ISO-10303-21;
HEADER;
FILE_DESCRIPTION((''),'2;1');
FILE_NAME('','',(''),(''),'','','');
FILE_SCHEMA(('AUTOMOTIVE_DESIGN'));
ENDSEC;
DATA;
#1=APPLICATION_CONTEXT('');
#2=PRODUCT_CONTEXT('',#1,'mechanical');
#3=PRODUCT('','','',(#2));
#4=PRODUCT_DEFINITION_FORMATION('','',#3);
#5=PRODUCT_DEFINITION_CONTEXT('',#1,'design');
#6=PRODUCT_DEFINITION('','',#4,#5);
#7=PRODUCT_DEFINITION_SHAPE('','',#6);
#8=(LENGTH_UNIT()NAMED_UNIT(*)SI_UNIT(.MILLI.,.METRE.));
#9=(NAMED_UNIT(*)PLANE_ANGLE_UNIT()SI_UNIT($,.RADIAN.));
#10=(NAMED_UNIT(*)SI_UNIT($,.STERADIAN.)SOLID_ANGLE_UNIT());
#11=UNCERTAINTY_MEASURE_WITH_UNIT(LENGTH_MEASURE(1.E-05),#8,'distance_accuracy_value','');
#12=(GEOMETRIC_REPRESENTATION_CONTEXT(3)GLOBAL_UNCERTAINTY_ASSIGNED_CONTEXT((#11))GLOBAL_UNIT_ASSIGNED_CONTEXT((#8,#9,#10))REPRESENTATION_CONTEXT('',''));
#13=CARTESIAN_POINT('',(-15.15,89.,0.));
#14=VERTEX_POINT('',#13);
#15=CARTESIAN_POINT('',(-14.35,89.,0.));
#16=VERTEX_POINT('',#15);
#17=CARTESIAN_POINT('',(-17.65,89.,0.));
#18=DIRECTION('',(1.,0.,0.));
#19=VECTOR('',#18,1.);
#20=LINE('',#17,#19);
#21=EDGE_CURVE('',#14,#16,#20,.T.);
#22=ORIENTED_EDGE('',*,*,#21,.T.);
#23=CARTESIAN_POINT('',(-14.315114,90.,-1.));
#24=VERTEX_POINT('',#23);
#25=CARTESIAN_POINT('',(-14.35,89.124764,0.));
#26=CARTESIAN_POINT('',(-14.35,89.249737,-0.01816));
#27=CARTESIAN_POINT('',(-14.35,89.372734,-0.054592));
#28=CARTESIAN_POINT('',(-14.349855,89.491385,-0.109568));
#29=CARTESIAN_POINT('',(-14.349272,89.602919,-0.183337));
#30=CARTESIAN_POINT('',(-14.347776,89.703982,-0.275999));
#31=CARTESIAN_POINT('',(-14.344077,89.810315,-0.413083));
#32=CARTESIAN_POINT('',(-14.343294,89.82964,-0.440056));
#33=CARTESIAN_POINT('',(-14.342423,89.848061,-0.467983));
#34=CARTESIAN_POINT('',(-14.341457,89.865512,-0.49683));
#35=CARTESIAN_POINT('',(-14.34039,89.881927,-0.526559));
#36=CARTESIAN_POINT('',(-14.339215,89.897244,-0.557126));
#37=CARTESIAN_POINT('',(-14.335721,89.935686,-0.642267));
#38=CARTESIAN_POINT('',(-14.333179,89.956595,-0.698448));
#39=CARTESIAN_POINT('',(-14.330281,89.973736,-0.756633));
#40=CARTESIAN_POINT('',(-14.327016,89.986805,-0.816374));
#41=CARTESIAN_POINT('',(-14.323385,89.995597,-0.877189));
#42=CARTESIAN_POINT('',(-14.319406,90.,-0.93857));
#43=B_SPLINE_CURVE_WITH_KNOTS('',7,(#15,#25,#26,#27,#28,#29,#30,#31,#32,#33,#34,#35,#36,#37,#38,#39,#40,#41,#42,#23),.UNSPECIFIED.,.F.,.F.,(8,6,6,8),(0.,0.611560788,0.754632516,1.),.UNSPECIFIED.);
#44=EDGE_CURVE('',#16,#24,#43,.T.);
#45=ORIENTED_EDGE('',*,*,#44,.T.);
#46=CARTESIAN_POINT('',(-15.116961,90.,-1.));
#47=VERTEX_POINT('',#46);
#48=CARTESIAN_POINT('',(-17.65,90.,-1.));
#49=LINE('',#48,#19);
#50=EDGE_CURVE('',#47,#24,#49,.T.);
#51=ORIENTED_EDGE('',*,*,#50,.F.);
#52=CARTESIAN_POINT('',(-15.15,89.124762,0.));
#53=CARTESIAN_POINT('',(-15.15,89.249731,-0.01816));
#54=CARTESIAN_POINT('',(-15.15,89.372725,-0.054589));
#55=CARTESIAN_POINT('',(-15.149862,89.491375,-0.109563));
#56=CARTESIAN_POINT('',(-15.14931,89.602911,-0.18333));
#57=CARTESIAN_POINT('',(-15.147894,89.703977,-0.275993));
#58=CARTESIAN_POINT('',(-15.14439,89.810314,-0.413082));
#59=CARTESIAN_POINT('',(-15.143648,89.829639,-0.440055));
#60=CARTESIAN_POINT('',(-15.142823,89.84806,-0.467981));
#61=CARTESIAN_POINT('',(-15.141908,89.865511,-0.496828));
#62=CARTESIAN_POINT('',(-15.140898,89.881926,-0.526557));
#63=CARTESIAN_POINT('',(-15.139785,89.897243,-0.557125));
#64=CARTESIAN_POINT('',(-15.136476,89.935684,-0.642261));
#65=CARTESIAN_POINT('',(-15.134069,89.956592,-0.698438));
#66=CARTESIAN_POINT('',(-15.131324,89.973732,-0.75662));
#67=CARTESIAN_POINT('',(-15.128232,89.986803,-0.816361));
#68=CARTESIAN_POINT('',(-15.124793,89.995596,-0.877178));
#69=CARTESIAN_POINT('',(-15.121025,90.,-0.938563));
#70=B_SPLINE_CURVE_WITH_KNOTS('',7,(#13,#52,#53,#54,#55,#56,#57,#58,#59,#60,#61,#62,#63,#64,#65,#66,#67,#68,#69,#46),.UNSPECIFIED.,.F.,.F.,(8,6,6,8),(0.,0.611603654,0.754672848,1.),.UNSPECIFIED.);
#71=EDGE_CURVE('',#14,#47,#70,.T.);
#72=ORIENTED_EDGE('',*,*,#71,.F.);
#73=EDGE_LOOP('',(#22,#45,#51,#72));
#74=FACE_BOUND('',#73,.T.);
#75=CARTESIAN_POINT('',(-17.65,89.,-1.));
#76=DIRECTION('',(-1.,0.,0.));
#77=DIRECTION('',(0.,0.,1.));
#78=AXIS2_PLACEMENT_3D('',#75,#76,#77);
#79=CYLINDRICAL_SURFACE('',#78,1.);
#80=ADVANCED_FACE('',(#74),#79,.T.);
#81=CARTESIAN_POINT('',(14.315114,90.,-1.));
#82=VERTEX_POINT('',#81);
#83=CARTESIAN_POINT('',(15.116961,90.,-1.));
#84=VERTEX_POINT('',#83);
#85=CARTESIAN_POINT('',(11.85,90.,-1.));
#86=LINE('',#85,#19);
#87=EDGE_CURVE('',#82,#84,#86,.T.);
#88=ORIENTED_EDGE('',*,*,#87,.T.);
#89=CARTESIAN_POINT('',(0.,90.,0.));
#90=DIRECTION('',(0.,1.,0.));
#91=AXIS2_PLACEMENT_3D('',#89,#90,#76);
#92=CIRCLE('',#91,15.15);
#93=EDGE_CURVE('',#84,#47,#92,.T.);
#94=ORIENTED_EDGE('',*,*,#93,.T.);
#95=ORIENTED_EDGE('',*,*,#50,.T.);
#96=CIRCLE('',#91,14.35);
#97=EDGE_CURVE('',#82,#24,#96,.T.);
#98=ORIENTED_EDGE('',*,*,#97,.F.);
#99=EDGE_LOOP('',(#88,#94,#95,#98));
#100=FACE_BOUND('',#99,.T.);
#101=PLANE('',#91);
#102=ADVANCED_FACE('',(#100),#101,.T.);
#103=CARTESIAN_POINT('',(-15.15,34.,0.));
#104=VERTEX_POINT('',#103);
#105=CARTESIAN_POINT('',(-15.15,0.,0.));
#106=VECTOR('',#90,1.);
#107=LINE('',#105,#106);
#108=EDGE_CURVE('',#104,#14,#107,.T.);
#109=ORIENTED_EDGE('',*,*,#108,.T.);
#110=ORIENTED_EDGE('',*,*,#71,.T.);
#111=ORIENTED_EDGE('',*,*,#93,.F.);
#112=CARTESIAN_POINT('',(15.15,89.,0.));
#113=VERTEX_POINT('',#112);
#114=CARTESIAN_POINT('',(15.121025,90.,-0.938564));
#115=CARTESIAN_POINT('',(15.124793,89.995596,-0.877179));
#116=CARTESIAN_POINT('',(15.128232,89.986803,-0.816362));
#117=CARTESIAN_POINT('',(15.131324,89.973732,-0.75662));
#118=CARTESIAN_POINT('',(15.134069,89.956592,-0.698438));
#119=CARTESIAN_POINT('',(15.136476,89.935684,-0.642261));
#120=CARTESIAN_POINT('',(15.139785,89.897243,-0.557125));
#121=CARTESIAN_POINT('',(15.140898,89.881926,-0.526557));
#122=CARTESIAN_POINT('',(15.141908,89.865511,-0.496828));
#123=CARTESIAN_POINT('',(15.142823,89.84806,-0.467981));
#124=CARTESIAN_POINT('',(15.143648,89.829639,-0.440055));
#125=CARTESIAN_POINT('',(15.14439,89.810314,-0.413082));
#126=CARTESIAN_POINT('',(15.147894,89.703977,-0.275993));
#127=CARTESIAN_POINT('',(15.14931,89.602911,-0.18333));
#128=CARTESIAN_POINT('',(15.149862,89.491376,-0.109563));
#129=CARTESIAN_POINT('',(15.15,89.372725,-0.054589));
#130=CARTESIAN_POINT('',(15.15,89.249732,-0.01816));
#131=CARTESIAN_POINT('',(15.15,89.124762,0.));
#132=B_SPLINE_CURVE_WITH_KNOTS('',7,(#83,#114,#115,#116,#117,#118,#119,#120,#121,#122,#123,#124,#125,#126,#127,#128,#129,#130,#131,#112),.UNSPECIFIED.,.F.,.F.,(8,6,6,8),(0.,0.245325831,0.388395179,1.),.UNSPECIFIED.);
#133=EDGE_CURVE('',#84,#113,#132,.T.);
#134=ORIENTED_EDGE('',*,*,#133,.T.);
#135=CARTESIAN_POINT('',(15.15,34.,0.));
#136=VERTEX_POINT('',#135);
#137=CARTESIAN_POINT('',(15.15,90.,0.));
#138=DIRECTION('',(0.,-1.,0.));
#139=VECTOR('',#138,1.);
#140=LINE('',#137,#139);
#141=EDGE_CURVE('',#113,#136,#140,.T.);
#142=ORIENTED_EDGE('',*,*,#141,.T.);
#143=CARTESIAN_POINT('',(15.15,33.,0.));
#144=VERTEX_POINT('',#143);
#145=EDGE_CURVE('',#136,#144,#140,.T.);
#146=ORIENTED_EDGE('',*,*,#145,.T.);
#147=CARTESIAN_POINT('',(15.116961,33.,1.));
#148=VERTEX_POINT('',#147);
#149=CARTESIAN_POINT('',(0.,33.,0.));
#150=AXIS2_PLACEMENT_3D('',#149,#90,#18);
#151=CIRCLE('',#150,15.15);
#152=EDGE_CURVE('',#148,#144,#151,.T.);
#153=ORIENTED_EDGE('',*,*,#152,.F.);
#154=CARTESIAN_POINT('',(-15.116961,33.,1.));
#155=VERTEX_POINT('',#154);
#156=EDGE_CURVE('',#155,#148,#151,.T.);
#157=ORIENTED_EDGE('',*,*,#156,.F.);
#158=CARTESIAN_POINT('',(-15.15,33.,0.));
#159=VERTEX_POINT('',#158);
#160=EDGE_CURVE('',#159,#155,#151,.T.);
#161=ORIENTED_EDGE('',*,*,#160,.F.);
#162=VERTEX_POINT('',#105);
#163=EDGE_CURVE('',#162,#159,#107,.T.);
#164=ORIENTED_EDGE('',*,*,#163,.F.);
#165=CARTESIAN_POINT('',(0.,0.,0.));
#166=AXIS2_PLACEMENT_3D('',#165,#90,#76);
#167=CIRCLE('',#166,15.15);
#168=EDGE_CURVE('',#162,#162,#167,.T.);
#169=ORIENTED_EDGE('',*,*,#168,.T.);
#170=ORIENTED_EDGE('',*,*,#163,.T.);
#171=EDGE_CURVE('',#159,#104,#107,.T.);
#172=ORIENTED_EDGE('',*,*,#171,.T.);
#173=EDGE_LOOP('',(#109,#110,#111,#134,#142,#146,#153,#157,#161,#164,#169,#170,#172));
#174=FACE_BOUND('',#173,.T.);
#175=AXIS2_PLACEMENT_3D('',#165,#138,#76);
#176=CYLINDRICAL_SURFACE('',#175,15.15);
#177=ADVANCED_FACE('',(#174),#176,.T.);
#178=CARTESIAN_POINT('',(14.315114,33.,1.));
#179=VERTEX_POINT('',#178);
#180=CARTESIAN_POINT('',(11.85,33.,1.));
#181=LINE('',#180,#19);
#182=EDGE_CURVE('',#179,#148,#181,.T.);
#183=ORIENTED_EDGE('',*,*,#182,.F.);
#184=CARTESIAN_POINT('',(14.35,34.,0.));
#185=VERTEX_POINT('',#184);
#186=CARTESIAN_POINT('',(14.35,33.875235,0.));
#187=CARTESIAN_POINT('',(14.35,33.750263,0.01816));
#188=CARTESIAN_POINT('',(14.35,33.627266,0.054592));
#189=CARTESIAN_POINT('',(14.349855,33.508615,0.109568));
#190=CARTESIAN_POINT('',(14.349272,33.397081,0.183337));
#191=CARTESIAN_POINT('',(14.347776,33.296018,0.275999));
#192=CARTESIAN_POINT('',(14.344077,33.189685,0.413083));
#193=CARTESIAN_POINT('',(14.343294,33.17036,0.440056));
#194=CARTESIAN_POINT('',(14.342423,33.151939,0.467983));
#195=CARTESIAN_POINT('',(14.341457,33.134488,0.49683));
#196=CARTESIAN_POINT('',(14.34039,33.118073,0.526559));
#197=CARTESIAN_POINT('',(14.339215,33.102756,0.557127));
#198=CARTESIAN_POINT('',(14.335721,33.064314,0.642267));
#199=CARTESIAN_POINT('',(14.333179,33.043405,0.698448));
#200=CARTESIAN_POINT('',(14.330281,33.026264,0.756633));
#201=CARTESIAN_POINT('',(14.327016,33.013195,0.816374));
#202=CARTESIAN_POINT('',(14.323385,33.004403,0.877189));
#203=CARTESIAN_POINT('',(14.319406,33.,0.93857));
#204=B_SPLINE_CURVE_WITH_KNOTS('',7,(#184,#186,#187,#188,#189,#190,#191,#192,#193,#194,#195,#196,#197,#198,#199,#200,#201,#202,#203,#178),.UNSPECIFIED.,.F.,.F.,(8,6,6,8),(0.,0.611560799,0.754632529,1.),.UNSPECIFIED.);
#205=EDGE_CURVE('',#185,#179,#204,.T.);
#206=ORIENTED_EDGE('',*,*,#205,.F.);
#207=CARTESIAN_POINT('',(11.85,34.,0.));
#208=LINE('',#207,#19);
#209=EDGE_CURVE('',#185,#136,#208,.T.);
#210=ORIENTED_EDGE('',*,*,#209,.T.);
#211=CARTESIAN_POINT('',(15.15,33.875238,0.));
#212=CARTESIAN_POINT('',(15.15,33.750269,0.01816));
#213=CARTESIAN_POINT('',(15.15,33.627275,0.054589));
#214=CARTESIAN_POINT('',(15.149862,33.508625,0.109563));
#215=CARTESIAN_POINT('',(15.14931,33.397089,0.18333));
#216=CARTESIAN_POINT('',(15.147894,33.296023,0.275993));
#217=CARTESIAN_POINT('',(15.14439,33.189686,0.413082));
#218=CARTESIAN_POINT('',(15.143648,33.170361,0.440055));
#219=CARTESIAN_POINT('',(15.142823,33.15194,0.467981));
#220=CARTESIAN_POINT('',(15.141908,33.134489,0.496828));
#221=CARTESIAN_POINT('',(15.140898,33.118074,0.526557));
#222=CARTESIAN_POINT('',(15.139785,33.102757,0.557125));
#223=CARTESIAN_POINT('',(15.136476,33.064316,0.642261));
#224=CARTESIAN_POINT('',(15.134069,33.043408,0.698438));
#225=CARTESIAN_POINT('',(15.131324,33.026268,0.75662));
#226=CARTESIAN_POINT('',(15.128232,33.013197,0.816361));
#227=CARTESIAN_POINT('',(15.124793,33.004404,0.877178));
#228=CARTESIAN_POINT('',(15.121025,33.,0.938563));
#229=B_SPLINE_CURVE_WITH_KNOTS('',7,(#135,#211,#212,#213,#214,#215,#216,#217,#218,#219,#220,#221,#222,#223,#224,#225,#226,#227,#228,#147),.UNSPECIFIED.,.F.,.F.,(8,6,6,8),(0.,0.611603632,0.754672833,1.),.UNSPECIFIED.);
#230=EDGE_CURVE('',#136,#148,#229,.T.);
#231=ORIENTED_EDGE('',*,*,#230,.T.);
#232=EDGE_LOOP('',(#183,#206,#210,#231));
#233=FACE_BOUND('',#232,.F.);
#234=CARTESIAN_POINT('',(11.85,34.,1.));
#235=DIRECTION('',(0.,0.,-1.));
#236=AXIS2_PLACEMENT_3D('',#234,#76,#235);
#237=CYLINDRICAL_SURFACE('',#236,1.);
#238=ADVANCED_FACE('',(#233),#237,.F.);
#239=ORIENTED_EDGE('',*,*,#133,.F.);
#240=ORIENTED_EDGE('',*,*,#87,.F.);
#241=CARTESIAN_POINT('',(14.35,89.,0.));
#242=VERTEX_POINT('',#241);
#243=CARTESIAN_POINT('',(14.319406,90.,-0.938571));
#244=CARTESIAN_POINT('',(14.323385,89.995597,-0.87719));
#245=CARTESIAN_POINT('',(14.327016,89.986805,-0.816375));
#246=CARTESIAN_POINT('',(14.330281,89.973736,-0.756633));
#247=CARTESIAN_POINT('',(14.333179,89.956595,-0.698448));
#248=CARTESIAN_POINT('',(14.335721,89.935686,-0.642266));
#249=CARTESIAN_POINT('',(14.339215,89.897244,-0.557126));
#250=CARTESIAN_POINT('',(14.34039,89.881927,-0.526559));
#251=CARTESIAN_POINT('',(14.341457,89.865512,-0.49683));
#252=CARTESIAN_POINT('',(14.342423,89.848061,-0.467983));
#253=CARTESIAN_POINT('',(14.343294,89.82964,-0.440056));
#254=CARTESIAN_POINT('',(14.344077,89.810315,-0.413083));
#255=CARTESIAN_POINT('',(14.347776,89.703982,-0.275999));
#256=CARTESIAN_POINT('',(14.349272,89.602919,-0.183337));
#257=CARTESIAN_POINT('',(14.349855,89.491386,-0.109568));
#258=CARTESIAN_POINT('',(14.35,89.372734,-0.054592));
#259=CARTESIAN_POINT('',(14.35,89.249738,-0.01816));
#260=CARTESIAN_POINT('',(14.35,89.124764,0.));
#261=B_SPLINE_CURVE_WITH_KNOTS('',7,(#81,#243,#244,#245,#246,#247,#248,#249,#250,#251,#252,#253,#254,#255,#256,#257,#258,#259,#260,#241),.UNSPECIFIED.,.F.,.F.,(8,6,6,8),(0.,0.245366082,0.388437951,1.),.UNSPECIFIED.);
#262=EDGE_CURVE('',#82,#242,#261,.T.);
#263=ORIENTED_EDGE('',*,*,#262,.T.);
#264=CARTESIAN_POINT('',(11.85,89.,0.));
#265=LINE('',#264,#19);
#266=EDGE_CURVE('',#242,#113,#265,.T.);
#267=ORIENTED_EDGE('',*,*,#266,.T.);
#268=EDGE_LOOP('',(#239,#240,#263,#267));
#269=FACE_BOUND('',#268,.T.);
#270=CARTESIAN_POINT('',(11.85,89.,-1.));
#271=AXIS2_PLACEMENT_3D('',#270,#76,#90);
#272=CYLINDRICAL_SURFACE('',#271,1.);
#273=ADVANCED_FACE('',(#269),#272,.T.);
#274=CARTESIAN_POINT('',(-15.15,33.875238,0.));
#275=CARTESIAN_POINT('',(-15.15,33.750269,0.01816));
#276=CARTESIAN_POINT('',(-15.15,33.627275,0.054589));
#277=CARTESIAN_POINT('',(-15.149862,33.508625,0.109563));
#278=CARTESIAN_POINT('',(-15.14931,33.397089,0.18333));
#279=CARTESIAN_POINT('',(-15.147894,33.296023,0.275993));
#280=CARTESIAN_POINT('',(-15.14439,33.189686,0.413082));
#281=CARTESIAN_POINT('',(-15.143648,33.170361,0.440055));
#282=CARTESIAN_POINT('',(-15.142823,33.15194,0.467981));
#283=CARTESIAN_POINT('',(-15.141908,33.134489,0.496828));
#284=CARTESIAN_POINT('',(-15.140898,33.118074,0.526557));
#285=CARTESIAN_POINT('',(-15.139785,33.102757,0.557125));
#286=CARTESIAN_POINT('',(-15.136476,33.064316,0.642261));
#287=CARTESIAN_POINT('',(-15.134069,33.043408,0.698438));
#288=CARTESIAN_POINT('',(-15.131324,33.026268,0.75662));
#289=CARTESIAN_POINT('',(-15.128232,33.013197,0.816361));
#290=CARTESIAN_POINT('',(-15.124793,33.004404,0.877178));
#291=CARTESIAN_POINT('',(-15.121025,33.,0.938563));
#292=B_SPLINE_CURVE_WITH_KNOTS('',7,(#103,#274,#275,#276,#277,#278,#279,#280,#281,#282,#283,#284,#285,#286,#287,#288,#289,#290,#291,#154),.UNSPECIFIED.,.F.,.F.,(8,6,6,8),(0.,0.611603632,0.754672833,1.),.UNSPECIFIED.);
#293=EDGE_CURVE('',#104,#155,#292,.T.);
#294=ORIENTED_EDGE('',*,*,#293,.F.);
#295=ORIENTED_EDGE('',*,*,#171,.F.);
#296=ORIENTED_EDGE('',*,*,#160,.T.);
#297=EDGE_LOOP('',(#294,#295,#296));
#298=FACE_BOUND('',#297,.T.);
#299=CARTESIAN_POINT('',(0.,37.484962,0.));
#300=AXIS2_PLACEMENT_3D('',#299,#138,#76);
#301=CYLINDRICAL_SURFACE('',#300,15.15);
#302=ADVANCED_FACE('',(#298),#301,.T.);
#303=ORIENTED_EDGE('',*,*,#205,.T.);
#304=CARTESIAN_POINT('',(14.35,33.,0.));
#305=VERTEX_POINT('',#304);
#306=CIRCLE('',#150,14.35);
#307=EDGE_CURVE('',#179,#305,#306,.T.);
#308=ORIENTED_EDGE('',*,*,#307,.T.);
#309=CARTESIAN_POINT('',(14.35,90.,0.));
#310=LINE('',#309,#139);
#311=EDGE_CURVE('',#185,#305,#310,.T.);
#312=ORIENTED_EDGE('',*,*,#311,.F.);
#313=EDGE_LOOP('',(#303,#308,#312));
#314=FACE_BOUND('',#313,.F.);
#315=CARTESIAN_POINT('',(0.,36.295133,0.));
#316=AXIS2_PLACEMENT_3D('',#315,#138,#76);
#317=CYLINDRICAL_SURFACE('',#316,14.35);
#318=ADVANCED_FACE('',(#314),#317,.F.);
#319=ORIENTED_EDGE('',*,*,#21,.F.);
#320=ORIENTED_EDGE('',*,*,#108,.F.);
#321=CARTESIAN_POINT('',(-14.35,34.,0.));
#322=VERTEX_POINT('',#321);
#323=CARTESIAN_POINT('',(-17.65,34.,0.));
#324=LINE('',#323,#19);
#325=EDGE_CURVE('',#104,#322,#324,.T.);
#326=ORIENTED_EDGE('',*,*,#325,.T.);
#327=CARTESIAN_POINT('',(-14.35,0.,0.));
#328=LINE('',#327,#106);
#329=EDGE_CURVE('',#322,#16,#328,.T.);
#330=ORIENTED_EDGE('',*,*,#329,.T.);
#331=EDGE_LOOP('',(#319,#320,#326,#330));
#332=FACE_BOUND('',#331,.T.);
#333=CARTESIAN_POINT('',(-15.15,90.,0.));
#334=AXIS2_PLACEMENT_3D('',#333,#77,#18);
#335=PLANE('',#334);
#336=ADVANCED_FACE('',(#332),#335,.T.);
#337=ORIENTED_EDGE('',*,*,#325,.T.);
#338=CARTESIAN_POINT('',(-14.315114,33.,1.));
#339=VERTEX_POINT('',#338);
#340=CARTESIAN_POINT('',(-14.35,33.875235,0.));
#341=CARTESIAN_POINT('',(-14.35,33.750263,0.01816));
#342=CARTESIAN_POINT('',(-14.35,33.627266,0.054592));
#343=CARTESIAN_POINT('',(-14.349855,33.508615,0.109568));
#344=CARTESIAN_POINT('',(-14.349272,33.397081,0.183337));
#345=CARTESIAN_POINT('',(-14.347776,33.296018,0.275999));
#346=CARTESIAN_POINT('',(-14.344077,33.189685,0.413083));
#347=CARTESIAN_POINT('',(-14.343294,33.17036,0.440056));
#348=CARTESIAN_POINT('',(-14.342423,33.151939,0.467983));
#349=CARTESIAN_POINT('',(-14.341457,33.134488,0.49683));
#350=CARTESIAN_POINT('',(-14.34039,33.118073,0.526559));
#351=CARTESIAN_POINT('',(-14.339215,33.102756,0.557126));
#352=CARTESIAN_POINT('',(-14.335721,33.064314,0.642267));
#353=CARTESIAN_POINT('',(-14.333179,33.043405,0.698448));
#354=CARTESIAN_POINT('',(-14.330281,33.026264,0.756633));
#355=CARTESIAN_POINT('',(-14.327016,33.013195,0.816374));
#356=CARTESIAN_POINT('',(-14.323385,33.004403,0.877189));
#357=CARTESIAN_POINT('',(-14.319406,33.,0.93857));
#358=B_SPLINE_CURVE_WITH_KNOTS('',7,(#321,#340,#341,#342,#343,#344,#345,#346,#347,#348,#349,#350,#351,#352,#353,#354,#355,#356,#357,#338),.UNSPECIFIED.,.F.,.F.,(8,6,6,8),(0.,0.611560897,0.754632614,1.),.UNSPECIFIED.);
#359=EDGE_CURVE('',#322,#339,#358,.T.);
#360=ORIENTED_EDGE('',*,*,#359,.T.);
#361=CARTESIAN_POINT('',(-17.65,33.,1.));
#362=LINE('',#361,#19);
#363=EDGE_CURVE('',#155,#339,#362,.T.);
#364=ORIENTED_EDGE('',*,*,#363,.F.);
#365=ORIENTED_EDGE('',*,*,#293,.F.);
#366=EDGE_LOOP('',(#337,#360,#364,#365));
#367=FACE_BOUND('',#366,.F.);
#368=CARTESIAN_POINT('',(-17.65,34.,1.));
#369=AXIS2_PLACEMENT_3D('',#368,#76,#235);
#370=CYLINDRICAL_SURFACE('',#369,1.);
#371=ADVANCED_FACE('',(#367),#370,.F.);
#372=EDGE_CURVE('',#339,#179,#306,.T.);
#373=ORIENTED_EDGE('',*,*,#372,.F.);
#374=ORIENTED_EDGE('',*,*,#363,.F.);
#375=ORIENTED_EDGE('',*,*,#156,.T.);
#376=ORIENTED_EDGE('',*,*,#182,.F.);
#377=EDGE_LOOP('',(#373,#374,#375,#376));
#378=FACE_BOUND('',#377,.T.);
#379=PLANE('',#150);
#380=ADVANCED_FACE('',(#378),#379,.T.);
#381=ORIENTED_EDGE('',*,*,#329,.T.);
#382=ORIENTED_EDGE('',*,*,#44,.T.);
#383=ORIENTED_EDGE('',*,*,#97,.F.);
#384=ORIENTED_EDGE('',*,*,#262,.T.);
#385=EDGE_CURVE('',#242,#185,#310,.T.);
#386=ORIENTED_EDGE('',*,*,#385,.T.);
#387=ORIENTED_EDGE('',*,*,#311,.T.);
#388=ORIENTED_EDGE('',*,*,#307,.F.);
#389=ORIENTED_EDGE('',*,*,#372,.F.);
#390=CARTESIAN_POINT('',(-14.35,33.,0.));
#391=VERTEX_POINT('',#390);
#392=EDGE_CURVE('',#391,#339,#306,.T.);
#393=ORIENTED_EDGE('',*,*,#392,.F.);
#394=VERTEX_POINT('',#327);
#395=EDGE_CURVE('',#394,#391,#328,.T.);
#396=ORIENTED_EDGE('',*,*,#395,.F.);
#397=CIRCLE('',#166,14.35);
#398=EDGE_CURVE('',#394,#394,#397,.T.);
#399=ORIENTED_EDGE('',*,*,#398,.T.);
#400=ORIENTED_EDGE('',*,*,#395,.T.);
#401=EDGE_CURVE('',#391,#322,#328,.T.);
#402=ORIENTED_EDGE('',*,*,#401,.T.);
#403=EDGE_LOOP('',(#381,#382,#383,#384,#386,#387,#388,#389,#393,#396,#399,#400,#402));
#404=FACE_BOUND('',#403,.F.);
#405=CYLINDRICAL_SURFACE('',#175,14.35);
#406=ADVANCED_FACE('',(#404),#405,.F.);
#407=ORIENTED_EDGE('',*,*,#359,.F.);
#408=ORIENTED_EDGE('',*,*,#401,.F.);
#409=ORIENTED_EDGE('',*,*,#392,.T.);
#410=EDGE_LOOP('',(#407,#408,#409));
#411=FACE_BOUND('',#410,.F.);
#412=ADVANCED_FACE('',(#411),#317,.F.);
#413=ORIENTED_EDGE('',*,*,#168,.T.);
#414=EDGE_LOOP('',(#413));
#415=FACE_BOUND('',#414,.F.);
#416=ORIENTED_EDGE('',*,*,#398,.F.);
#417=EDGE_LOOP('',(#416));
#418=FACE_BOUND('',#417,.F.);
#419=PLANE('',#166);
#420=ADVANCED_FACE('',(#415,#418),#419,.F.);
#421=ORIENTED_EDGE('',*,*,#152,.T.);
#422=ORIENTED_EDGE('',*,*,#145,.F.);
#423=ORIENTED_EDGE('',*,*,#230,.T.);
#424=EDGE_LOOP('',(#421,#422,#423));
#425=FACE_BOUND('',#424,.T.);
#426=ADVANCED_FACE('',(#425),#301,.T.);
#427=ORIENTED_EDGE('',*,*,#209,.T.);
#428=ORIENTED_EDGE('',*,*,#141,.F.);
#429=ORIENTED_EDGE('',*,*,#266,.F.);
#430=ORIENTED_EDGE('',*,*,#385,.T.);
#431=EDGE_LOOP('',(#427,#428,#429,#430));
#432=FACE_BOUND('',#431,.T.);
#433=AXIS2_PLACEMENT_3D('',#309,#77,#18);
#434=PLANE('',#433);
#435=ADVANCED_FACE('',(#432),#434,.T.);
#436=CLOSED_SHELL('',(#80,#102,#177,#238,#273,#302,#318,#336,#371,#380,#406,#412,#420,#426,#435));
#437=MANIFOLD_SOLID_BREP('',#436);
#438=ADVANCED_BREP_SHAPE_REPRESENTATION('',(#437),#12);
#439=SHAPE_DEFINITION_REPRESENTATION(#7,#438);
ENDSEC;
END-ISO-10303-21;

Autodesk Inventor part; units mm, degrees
ref_plane "YZ Plane" through (0, 0, 0) normal (1, 0, 0) x (0, 1, 0)
ref_plane "XZ Plane" through (0, 0, 0) normal (0, 1, 0) x (-1, 0, 0)
ref_plane "XY Plane" through (0, 0, 0) normal (0, 0, 1) x (1, 0, 0)
sketch "Boceto1" plane through (0, 0, 0) normal (0, 1, 0) x (-1, 0, 0)
  circle A0 centre (0, 0) radius 14.35
  circle A1 centre (0, 0) radius 15.15
  dimension "d0" = 28.7
  dimension "d1" = 0.8
extrude "Extrusión1" add sketch "Boceto1" along normal blind 90
sketch "Boceto2" plane through (0, 90, 0) normal (0, 1, 0) x (1, 0, 0)
  circle A0 centre (0, 0) radius 15.15 projected
  circle A1 centre (0, 0) radius 14.35 projected
  line L0 (-15.15, 0) -> (-14.35, 0)
  line L1 (14.35, 0) -> (15.15, 0)
extrude "Extrusión2" cut sketch "Boceto2" against normal blind 57 contours A0 L0 A1 L1 picked at (14.5976, -2.3533)
fillet "Empalme1" radius 1 4 edges at (-14.75, 33, 0) (14.75, 33, 0) (-14.75, 90, 0) (14.75, 90, 0)
properties part number "Embellecedor Espejo"
